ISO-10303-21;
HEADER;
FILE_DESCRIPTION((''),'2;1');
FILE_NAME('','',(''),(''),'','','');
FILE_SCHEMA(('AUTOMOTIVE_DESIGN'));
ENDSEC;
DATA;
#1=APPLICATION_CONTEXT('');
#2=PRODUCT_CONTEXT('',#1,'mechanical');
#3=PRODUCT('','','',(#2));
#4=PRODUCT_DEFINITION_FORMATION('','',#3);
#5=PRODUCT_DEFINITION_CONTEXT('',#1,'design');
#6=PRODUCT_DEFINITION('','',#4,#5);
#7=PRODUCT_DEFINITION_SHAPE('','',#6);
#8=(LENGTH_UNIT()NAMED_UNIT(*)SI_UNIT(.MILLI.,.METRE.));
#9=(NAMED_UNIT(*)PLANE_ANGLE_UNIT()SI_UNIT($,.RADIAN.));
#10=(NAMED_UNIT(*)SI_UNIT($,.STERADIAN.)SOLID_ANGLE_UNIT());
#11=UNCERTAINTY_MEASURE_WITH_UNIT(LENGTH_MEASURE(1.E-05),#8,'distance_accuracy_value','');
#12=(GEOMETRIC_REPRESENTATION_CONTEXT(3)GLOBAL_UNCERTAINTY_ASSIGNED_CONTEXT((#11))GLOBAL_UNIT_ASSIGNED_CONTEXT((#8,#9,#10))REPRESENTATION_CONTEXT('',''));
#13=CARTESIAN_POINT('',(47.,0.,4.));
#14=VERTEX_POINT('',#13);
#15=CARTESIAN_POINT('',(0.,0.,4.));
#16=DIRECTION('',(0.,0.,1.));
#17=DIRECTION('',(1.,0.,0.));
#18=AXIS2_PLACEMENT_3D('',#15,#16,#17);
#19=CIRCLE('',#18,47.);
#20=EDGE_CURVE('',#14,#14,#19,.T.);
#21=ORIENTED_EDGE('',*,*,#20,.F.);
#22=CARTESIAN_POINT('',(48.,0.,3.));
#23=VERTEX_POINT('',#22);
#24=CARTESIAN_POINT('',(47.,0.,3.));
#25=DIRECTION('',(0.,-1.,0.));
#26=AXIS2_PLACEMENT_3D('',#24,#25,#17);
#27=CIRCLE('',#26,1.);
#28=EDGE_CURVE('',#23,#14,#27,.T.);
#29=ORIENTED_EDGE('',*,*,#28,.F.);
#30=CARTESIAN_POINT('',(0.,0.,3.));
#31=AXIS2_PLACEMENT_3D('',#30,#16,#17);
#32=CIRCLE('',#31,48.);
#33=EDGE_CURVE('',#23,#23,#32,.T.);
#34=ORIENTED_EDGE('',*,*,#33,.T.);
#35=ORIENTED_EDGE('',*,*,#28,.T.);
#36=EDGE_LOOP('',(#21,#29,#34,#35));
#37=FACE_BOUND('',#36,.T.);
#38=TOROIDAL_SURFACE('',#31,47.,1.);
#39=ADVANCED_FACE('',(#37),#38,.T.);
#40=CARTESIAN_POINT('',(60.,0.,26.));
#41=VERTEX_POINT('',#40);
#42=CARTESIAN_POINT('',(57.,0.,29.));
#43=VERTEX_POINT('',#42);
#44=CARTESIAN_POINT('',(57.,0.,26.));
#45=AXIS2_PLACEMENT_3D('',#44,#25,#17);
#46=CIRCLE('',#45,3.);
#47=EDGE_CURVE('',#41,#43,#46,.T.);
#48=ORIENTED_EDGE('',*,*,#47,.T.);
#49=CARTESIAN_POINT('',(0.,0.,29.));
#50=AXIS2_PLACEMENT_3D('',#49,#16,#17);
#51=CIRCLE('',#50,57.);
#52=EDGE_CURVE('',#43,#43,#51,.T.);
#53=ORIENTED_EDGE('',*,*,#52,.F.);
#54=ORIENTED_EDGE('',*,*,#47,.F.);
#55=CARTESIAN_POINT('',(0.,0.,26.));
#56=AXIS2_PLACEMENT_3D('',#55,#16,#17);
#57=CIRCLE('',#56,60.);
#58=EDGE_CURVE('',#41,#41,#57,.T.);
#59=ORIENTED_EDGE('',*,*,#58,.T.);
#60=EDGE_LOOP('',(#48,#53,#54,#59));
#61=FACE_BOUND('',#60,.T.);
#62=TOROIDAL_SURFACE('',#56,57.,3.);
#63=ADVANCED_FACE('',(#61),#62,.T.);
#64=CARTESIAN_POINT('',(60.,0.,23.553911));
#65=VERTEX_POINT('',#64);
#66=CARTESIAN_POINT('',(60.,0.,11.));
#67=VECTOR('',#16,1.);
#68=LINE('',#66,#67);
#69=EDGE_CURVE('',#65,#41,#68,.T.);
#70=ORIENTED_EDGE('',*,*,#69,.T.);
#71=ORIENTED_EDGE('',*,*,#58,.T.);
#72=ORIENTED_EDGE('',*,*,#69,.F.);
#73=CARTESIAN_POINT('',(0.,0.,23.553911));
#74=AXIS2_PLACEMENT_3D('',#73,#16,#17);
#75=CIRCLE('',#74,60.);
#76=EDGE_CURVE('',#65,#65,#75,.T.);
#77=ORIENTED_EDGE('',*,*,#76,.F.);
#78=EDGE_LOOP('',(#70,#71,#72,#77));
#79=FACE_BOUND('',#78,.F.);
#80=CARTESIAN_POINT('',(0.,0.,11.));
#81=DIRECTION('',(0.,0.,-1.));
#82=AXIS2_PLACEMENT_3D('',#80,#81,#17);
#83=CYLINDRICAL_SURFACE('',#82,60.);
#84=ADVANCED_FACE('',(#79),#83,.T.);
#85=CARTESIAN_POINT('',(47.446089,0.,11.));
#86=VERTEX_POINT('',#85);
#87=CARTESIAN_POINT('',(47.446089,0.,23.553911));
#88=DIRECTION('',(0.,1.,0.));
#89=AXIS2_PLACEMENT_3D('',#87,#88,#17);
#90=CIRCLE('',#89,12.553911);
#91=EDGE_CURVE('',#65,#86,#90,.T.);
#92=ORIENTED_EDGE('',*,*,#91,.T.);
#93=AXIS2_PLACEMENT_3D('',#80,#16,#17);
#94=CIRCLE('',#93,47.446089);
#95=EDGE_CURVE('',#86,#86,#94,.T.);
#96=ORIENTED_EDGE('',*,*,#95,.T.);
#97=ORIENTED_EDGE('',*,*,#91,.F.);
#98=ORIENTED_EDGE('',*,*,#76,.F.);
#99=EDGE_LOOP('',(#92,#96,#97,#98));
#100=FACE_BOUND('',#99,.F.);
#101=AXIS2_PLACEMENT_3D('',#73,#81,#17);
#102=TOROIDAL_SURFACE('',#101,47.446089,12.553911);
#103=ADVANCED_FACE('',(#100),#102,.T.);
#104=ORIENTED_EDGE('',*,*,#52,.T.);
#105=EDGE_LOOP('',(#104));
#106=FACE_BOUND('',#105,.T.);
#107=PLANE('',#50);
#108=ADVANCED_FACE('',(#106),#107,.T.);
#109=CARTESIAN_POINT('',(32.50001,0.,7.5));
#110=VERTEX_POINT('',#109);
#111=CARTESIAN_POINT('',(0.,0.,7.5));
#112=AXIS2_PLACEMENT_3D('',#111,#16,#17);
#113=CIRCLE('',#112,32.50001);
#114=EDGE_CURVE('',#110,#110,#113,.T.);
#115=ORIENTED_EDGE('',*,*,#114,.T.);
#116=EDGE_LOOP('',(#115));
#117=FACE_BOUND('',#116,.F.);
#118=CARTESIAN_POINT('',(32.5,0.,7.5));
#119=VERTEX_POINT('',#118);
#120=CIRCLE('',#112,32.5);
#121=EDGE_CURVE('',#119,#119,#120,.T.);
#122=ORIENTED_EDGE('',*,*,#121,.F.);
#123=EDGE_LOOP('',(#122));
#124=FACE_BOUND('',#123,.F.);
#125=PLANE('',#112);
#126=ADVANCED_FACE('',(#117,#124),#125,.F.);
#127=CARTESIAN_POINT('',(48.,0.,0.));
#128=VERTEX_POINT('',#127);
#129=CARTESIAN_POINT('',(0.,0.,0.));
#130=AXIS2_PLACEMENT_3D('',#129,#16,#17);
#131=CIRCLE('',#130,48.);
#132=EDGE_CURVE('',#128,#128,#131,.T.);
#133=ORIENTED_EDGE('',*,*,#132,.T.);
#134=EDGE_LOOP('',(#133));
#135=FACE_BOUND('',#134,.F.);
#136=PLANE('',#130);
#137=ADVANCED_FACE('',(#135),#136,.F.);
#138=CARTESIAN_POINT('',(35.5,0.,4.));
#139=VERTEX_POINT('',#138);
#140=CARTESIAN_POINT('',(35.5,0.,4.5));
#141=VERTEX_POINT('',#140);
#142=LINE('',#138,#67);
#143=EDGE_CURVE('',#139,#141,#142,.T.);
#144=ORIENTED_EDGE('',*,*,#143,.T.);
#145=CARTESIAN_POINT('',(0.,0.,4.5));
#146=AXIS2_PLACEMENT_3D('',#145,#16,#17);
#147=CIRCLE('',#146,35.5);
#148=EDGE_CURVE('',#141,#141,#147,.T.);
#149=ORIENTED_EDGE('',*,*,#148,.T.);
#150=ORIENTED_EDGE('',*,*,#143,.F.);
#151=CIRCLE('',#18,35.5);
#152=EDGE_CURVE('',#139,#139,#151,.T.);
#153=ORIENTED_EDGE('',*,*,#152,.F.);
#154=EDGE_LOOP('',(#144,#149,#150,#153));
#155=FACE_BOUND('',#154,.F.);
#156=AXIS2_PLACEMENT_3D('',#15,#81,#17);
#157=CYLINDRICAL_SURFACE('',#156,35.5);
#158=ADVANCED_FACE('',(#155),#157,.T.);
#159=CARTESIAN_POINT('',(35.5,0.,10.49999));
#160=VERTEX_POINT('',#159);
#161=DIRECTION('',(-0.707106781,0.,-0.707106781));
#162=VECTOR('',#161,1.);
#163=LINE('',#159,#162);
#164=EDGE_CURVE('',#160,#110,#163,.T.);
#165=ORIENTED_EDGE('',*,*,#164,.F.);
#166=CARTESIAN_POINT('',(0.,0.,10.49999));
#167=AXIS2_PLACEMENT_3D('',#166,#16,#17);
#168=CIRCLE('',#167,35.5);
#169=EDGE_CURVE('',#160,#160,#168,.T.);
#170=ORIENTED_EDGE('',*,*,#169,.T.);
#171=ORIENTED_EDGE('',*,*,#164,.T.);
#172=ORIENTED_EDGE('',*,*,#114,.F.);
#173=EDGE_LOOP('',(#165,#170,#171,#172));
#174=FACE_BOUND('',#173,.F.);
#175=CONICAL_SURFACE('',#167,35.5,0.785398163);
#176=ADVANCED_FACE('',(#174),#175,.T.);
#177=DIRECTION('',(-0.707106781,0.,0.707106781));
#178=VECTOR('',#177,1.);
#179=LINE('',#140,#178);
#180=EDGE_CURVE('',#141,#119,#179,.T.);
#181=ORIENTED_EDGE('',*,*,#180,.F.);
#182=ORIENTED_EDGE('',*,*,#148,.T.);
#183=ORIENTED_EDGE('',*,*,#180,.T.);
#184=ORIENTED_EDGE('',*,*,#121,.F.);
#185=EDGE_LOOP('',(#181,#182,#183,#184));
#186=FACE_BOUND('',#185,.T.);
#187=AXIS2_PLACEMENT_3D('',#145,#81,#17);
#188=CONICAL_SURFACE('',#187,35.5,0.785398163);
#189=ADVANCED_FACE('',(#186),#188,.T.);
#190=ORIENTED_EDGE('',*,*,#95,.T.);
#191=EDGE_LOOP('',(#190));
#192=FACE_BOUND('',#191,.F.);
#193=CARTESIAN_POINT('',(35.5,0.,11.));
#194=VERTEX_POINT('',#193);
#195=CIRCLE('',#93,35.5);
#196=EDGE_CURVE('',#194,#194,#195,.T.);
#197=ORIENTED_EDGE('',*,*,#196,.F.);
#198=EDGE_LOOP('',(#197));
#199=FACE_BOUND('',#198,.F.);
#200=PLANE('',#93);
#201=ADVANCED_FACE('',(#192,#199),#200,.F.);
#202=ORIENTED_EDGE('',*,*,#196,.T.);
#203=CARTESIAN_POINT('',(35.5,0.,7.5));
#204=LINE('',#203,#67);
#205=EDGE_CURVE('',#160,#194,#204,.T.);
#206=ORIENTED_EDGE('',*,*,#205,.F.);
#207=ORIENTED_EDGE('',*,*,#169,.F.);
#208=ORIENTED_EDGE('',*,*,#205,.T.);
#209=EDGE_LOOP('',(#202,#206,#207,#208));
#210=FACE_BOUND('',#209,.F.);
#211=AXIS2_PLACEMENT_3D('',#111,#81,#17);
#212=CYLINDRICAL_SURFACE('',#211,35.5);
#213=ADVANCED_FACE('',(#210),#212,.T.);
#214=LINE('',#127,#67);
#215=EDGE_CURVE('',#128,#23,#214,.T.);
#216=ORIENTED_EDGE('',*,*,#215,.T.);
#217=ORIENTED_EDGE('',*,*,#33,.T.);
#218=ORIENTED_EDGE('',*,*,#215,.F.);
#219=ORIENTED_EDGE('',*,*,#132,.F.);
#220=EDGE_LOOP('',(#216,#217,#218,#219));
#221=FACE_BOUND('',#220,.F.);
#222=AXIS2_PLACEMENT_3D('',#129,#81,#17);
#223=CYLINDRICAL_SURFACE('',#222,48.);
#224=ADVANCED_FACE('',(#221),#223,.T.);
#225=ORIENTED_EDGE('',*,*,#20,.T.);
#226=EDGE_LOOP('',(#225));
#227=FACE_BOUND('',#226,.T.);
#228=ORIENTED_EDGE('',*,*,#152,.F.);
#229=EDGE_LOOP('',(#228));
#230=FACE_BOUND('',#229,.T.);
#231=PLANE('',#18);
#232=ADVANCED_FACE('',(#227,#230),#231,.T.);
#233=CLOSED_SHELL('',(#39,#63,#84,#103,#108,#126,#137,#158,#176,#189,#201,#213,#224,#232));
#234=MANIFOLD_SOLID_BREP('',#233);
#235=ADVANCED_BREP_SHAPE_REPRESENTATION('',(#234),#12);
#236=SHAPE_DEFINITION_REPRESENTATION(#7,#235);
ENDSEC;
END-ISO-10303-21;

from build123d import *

# Parameters (mm, degrees)
F0_R      = 48
F1_DEPTH  = 4
F2_R      = 1
F3_R      = 35.5
F4_DEPTH  = 3.5
F5_SIZE   = 3
F6_R      = 35.5
F6_R_2    = 32.5
F7_DEPTH  = 3.5
F8_SIZE   = 2.99999
F9_R      = 60
F9_R_2    = 47.0001739343
F9_R_3    = 35.5
F10_DEPTH = 18
F11_R     = 12.5539105243
F12_R     = 3


# Not quite as in the source:
# - a fillet or chamfer is up to 0.001 mm smaller than in the source, because OpenCascade refuses the exact size


with BuildPart() as f1:
    # F0 (on Top) → F1 (new body)
    with BuildSketch(Plane.XY):
        Circle(F0_R)
    extrude(amount=F1_DEPTH)

    # F2
    f2_edges = [f1.edges().sort_by_distance(p)[0] for p in [
        (-48, 0, 4),
    ]]
    fillet(f2_edges, radius=F2_R)

    # F3 (on face) → F4 (join)
    with BuildSketch(Plane.XY.offset(4)):
        Circle(F3_R)
    extrude(amount=F4_DEPTH)

    # F5
    f5_edges = [f1.edges().sort_by_distance(p)[0] for p in [
        (-35.5, 0, 7.5),
    ]]
    chamfer(f5_edges, length=F5_SIZE)

    # F6 (on face) → F7 (join)
    with BuildSketch(Plane.XY.offset(7.5)):
        Circle(F6_R)
        Circle(F6_R_2, mode=Mode.SUBTRACT)
        Circle(F6_R_2)
    extrude(amount=F7_DEPTH)

    # F8 (size 3 in the source; OpenCascade refuses exactly that, so slightly less here)
    f8_edges = [f1.edges().sort_by_distance(p)[0] for p in [
        (-35.5, 0, 7.5),
    ]]
    chamfer(f8_edges, length=F8_SIZE)

    # F9 (on face) → F10 (join)
    with BuildSketch(Plane.XY.offset(11)):
        Circle(F9_R)
        Circle(F9_R_2, mode=Mode.SUBTRACT)
        Circle(F9_R_2)
        Circle(F9_R_3, mode=Mode.SUBTRACT)
        Circle(F9_R_3)
    extrude(amount=F10_DEPTH)

    # F11
    f11_edges = [f1.edges().sort_by_distance(p)[0] for p in [
        (-60, 0, 11),
    ]]
    fillet(f11_edges, radius=F11_R)

    # F12
    f12_edges = [f1.edges().sort_by_distance(p)[0] for p in [
        (-60, 0, 29),
    ]]
    fillet(f12_edges, radius=F12_R)


solid = f1.part
